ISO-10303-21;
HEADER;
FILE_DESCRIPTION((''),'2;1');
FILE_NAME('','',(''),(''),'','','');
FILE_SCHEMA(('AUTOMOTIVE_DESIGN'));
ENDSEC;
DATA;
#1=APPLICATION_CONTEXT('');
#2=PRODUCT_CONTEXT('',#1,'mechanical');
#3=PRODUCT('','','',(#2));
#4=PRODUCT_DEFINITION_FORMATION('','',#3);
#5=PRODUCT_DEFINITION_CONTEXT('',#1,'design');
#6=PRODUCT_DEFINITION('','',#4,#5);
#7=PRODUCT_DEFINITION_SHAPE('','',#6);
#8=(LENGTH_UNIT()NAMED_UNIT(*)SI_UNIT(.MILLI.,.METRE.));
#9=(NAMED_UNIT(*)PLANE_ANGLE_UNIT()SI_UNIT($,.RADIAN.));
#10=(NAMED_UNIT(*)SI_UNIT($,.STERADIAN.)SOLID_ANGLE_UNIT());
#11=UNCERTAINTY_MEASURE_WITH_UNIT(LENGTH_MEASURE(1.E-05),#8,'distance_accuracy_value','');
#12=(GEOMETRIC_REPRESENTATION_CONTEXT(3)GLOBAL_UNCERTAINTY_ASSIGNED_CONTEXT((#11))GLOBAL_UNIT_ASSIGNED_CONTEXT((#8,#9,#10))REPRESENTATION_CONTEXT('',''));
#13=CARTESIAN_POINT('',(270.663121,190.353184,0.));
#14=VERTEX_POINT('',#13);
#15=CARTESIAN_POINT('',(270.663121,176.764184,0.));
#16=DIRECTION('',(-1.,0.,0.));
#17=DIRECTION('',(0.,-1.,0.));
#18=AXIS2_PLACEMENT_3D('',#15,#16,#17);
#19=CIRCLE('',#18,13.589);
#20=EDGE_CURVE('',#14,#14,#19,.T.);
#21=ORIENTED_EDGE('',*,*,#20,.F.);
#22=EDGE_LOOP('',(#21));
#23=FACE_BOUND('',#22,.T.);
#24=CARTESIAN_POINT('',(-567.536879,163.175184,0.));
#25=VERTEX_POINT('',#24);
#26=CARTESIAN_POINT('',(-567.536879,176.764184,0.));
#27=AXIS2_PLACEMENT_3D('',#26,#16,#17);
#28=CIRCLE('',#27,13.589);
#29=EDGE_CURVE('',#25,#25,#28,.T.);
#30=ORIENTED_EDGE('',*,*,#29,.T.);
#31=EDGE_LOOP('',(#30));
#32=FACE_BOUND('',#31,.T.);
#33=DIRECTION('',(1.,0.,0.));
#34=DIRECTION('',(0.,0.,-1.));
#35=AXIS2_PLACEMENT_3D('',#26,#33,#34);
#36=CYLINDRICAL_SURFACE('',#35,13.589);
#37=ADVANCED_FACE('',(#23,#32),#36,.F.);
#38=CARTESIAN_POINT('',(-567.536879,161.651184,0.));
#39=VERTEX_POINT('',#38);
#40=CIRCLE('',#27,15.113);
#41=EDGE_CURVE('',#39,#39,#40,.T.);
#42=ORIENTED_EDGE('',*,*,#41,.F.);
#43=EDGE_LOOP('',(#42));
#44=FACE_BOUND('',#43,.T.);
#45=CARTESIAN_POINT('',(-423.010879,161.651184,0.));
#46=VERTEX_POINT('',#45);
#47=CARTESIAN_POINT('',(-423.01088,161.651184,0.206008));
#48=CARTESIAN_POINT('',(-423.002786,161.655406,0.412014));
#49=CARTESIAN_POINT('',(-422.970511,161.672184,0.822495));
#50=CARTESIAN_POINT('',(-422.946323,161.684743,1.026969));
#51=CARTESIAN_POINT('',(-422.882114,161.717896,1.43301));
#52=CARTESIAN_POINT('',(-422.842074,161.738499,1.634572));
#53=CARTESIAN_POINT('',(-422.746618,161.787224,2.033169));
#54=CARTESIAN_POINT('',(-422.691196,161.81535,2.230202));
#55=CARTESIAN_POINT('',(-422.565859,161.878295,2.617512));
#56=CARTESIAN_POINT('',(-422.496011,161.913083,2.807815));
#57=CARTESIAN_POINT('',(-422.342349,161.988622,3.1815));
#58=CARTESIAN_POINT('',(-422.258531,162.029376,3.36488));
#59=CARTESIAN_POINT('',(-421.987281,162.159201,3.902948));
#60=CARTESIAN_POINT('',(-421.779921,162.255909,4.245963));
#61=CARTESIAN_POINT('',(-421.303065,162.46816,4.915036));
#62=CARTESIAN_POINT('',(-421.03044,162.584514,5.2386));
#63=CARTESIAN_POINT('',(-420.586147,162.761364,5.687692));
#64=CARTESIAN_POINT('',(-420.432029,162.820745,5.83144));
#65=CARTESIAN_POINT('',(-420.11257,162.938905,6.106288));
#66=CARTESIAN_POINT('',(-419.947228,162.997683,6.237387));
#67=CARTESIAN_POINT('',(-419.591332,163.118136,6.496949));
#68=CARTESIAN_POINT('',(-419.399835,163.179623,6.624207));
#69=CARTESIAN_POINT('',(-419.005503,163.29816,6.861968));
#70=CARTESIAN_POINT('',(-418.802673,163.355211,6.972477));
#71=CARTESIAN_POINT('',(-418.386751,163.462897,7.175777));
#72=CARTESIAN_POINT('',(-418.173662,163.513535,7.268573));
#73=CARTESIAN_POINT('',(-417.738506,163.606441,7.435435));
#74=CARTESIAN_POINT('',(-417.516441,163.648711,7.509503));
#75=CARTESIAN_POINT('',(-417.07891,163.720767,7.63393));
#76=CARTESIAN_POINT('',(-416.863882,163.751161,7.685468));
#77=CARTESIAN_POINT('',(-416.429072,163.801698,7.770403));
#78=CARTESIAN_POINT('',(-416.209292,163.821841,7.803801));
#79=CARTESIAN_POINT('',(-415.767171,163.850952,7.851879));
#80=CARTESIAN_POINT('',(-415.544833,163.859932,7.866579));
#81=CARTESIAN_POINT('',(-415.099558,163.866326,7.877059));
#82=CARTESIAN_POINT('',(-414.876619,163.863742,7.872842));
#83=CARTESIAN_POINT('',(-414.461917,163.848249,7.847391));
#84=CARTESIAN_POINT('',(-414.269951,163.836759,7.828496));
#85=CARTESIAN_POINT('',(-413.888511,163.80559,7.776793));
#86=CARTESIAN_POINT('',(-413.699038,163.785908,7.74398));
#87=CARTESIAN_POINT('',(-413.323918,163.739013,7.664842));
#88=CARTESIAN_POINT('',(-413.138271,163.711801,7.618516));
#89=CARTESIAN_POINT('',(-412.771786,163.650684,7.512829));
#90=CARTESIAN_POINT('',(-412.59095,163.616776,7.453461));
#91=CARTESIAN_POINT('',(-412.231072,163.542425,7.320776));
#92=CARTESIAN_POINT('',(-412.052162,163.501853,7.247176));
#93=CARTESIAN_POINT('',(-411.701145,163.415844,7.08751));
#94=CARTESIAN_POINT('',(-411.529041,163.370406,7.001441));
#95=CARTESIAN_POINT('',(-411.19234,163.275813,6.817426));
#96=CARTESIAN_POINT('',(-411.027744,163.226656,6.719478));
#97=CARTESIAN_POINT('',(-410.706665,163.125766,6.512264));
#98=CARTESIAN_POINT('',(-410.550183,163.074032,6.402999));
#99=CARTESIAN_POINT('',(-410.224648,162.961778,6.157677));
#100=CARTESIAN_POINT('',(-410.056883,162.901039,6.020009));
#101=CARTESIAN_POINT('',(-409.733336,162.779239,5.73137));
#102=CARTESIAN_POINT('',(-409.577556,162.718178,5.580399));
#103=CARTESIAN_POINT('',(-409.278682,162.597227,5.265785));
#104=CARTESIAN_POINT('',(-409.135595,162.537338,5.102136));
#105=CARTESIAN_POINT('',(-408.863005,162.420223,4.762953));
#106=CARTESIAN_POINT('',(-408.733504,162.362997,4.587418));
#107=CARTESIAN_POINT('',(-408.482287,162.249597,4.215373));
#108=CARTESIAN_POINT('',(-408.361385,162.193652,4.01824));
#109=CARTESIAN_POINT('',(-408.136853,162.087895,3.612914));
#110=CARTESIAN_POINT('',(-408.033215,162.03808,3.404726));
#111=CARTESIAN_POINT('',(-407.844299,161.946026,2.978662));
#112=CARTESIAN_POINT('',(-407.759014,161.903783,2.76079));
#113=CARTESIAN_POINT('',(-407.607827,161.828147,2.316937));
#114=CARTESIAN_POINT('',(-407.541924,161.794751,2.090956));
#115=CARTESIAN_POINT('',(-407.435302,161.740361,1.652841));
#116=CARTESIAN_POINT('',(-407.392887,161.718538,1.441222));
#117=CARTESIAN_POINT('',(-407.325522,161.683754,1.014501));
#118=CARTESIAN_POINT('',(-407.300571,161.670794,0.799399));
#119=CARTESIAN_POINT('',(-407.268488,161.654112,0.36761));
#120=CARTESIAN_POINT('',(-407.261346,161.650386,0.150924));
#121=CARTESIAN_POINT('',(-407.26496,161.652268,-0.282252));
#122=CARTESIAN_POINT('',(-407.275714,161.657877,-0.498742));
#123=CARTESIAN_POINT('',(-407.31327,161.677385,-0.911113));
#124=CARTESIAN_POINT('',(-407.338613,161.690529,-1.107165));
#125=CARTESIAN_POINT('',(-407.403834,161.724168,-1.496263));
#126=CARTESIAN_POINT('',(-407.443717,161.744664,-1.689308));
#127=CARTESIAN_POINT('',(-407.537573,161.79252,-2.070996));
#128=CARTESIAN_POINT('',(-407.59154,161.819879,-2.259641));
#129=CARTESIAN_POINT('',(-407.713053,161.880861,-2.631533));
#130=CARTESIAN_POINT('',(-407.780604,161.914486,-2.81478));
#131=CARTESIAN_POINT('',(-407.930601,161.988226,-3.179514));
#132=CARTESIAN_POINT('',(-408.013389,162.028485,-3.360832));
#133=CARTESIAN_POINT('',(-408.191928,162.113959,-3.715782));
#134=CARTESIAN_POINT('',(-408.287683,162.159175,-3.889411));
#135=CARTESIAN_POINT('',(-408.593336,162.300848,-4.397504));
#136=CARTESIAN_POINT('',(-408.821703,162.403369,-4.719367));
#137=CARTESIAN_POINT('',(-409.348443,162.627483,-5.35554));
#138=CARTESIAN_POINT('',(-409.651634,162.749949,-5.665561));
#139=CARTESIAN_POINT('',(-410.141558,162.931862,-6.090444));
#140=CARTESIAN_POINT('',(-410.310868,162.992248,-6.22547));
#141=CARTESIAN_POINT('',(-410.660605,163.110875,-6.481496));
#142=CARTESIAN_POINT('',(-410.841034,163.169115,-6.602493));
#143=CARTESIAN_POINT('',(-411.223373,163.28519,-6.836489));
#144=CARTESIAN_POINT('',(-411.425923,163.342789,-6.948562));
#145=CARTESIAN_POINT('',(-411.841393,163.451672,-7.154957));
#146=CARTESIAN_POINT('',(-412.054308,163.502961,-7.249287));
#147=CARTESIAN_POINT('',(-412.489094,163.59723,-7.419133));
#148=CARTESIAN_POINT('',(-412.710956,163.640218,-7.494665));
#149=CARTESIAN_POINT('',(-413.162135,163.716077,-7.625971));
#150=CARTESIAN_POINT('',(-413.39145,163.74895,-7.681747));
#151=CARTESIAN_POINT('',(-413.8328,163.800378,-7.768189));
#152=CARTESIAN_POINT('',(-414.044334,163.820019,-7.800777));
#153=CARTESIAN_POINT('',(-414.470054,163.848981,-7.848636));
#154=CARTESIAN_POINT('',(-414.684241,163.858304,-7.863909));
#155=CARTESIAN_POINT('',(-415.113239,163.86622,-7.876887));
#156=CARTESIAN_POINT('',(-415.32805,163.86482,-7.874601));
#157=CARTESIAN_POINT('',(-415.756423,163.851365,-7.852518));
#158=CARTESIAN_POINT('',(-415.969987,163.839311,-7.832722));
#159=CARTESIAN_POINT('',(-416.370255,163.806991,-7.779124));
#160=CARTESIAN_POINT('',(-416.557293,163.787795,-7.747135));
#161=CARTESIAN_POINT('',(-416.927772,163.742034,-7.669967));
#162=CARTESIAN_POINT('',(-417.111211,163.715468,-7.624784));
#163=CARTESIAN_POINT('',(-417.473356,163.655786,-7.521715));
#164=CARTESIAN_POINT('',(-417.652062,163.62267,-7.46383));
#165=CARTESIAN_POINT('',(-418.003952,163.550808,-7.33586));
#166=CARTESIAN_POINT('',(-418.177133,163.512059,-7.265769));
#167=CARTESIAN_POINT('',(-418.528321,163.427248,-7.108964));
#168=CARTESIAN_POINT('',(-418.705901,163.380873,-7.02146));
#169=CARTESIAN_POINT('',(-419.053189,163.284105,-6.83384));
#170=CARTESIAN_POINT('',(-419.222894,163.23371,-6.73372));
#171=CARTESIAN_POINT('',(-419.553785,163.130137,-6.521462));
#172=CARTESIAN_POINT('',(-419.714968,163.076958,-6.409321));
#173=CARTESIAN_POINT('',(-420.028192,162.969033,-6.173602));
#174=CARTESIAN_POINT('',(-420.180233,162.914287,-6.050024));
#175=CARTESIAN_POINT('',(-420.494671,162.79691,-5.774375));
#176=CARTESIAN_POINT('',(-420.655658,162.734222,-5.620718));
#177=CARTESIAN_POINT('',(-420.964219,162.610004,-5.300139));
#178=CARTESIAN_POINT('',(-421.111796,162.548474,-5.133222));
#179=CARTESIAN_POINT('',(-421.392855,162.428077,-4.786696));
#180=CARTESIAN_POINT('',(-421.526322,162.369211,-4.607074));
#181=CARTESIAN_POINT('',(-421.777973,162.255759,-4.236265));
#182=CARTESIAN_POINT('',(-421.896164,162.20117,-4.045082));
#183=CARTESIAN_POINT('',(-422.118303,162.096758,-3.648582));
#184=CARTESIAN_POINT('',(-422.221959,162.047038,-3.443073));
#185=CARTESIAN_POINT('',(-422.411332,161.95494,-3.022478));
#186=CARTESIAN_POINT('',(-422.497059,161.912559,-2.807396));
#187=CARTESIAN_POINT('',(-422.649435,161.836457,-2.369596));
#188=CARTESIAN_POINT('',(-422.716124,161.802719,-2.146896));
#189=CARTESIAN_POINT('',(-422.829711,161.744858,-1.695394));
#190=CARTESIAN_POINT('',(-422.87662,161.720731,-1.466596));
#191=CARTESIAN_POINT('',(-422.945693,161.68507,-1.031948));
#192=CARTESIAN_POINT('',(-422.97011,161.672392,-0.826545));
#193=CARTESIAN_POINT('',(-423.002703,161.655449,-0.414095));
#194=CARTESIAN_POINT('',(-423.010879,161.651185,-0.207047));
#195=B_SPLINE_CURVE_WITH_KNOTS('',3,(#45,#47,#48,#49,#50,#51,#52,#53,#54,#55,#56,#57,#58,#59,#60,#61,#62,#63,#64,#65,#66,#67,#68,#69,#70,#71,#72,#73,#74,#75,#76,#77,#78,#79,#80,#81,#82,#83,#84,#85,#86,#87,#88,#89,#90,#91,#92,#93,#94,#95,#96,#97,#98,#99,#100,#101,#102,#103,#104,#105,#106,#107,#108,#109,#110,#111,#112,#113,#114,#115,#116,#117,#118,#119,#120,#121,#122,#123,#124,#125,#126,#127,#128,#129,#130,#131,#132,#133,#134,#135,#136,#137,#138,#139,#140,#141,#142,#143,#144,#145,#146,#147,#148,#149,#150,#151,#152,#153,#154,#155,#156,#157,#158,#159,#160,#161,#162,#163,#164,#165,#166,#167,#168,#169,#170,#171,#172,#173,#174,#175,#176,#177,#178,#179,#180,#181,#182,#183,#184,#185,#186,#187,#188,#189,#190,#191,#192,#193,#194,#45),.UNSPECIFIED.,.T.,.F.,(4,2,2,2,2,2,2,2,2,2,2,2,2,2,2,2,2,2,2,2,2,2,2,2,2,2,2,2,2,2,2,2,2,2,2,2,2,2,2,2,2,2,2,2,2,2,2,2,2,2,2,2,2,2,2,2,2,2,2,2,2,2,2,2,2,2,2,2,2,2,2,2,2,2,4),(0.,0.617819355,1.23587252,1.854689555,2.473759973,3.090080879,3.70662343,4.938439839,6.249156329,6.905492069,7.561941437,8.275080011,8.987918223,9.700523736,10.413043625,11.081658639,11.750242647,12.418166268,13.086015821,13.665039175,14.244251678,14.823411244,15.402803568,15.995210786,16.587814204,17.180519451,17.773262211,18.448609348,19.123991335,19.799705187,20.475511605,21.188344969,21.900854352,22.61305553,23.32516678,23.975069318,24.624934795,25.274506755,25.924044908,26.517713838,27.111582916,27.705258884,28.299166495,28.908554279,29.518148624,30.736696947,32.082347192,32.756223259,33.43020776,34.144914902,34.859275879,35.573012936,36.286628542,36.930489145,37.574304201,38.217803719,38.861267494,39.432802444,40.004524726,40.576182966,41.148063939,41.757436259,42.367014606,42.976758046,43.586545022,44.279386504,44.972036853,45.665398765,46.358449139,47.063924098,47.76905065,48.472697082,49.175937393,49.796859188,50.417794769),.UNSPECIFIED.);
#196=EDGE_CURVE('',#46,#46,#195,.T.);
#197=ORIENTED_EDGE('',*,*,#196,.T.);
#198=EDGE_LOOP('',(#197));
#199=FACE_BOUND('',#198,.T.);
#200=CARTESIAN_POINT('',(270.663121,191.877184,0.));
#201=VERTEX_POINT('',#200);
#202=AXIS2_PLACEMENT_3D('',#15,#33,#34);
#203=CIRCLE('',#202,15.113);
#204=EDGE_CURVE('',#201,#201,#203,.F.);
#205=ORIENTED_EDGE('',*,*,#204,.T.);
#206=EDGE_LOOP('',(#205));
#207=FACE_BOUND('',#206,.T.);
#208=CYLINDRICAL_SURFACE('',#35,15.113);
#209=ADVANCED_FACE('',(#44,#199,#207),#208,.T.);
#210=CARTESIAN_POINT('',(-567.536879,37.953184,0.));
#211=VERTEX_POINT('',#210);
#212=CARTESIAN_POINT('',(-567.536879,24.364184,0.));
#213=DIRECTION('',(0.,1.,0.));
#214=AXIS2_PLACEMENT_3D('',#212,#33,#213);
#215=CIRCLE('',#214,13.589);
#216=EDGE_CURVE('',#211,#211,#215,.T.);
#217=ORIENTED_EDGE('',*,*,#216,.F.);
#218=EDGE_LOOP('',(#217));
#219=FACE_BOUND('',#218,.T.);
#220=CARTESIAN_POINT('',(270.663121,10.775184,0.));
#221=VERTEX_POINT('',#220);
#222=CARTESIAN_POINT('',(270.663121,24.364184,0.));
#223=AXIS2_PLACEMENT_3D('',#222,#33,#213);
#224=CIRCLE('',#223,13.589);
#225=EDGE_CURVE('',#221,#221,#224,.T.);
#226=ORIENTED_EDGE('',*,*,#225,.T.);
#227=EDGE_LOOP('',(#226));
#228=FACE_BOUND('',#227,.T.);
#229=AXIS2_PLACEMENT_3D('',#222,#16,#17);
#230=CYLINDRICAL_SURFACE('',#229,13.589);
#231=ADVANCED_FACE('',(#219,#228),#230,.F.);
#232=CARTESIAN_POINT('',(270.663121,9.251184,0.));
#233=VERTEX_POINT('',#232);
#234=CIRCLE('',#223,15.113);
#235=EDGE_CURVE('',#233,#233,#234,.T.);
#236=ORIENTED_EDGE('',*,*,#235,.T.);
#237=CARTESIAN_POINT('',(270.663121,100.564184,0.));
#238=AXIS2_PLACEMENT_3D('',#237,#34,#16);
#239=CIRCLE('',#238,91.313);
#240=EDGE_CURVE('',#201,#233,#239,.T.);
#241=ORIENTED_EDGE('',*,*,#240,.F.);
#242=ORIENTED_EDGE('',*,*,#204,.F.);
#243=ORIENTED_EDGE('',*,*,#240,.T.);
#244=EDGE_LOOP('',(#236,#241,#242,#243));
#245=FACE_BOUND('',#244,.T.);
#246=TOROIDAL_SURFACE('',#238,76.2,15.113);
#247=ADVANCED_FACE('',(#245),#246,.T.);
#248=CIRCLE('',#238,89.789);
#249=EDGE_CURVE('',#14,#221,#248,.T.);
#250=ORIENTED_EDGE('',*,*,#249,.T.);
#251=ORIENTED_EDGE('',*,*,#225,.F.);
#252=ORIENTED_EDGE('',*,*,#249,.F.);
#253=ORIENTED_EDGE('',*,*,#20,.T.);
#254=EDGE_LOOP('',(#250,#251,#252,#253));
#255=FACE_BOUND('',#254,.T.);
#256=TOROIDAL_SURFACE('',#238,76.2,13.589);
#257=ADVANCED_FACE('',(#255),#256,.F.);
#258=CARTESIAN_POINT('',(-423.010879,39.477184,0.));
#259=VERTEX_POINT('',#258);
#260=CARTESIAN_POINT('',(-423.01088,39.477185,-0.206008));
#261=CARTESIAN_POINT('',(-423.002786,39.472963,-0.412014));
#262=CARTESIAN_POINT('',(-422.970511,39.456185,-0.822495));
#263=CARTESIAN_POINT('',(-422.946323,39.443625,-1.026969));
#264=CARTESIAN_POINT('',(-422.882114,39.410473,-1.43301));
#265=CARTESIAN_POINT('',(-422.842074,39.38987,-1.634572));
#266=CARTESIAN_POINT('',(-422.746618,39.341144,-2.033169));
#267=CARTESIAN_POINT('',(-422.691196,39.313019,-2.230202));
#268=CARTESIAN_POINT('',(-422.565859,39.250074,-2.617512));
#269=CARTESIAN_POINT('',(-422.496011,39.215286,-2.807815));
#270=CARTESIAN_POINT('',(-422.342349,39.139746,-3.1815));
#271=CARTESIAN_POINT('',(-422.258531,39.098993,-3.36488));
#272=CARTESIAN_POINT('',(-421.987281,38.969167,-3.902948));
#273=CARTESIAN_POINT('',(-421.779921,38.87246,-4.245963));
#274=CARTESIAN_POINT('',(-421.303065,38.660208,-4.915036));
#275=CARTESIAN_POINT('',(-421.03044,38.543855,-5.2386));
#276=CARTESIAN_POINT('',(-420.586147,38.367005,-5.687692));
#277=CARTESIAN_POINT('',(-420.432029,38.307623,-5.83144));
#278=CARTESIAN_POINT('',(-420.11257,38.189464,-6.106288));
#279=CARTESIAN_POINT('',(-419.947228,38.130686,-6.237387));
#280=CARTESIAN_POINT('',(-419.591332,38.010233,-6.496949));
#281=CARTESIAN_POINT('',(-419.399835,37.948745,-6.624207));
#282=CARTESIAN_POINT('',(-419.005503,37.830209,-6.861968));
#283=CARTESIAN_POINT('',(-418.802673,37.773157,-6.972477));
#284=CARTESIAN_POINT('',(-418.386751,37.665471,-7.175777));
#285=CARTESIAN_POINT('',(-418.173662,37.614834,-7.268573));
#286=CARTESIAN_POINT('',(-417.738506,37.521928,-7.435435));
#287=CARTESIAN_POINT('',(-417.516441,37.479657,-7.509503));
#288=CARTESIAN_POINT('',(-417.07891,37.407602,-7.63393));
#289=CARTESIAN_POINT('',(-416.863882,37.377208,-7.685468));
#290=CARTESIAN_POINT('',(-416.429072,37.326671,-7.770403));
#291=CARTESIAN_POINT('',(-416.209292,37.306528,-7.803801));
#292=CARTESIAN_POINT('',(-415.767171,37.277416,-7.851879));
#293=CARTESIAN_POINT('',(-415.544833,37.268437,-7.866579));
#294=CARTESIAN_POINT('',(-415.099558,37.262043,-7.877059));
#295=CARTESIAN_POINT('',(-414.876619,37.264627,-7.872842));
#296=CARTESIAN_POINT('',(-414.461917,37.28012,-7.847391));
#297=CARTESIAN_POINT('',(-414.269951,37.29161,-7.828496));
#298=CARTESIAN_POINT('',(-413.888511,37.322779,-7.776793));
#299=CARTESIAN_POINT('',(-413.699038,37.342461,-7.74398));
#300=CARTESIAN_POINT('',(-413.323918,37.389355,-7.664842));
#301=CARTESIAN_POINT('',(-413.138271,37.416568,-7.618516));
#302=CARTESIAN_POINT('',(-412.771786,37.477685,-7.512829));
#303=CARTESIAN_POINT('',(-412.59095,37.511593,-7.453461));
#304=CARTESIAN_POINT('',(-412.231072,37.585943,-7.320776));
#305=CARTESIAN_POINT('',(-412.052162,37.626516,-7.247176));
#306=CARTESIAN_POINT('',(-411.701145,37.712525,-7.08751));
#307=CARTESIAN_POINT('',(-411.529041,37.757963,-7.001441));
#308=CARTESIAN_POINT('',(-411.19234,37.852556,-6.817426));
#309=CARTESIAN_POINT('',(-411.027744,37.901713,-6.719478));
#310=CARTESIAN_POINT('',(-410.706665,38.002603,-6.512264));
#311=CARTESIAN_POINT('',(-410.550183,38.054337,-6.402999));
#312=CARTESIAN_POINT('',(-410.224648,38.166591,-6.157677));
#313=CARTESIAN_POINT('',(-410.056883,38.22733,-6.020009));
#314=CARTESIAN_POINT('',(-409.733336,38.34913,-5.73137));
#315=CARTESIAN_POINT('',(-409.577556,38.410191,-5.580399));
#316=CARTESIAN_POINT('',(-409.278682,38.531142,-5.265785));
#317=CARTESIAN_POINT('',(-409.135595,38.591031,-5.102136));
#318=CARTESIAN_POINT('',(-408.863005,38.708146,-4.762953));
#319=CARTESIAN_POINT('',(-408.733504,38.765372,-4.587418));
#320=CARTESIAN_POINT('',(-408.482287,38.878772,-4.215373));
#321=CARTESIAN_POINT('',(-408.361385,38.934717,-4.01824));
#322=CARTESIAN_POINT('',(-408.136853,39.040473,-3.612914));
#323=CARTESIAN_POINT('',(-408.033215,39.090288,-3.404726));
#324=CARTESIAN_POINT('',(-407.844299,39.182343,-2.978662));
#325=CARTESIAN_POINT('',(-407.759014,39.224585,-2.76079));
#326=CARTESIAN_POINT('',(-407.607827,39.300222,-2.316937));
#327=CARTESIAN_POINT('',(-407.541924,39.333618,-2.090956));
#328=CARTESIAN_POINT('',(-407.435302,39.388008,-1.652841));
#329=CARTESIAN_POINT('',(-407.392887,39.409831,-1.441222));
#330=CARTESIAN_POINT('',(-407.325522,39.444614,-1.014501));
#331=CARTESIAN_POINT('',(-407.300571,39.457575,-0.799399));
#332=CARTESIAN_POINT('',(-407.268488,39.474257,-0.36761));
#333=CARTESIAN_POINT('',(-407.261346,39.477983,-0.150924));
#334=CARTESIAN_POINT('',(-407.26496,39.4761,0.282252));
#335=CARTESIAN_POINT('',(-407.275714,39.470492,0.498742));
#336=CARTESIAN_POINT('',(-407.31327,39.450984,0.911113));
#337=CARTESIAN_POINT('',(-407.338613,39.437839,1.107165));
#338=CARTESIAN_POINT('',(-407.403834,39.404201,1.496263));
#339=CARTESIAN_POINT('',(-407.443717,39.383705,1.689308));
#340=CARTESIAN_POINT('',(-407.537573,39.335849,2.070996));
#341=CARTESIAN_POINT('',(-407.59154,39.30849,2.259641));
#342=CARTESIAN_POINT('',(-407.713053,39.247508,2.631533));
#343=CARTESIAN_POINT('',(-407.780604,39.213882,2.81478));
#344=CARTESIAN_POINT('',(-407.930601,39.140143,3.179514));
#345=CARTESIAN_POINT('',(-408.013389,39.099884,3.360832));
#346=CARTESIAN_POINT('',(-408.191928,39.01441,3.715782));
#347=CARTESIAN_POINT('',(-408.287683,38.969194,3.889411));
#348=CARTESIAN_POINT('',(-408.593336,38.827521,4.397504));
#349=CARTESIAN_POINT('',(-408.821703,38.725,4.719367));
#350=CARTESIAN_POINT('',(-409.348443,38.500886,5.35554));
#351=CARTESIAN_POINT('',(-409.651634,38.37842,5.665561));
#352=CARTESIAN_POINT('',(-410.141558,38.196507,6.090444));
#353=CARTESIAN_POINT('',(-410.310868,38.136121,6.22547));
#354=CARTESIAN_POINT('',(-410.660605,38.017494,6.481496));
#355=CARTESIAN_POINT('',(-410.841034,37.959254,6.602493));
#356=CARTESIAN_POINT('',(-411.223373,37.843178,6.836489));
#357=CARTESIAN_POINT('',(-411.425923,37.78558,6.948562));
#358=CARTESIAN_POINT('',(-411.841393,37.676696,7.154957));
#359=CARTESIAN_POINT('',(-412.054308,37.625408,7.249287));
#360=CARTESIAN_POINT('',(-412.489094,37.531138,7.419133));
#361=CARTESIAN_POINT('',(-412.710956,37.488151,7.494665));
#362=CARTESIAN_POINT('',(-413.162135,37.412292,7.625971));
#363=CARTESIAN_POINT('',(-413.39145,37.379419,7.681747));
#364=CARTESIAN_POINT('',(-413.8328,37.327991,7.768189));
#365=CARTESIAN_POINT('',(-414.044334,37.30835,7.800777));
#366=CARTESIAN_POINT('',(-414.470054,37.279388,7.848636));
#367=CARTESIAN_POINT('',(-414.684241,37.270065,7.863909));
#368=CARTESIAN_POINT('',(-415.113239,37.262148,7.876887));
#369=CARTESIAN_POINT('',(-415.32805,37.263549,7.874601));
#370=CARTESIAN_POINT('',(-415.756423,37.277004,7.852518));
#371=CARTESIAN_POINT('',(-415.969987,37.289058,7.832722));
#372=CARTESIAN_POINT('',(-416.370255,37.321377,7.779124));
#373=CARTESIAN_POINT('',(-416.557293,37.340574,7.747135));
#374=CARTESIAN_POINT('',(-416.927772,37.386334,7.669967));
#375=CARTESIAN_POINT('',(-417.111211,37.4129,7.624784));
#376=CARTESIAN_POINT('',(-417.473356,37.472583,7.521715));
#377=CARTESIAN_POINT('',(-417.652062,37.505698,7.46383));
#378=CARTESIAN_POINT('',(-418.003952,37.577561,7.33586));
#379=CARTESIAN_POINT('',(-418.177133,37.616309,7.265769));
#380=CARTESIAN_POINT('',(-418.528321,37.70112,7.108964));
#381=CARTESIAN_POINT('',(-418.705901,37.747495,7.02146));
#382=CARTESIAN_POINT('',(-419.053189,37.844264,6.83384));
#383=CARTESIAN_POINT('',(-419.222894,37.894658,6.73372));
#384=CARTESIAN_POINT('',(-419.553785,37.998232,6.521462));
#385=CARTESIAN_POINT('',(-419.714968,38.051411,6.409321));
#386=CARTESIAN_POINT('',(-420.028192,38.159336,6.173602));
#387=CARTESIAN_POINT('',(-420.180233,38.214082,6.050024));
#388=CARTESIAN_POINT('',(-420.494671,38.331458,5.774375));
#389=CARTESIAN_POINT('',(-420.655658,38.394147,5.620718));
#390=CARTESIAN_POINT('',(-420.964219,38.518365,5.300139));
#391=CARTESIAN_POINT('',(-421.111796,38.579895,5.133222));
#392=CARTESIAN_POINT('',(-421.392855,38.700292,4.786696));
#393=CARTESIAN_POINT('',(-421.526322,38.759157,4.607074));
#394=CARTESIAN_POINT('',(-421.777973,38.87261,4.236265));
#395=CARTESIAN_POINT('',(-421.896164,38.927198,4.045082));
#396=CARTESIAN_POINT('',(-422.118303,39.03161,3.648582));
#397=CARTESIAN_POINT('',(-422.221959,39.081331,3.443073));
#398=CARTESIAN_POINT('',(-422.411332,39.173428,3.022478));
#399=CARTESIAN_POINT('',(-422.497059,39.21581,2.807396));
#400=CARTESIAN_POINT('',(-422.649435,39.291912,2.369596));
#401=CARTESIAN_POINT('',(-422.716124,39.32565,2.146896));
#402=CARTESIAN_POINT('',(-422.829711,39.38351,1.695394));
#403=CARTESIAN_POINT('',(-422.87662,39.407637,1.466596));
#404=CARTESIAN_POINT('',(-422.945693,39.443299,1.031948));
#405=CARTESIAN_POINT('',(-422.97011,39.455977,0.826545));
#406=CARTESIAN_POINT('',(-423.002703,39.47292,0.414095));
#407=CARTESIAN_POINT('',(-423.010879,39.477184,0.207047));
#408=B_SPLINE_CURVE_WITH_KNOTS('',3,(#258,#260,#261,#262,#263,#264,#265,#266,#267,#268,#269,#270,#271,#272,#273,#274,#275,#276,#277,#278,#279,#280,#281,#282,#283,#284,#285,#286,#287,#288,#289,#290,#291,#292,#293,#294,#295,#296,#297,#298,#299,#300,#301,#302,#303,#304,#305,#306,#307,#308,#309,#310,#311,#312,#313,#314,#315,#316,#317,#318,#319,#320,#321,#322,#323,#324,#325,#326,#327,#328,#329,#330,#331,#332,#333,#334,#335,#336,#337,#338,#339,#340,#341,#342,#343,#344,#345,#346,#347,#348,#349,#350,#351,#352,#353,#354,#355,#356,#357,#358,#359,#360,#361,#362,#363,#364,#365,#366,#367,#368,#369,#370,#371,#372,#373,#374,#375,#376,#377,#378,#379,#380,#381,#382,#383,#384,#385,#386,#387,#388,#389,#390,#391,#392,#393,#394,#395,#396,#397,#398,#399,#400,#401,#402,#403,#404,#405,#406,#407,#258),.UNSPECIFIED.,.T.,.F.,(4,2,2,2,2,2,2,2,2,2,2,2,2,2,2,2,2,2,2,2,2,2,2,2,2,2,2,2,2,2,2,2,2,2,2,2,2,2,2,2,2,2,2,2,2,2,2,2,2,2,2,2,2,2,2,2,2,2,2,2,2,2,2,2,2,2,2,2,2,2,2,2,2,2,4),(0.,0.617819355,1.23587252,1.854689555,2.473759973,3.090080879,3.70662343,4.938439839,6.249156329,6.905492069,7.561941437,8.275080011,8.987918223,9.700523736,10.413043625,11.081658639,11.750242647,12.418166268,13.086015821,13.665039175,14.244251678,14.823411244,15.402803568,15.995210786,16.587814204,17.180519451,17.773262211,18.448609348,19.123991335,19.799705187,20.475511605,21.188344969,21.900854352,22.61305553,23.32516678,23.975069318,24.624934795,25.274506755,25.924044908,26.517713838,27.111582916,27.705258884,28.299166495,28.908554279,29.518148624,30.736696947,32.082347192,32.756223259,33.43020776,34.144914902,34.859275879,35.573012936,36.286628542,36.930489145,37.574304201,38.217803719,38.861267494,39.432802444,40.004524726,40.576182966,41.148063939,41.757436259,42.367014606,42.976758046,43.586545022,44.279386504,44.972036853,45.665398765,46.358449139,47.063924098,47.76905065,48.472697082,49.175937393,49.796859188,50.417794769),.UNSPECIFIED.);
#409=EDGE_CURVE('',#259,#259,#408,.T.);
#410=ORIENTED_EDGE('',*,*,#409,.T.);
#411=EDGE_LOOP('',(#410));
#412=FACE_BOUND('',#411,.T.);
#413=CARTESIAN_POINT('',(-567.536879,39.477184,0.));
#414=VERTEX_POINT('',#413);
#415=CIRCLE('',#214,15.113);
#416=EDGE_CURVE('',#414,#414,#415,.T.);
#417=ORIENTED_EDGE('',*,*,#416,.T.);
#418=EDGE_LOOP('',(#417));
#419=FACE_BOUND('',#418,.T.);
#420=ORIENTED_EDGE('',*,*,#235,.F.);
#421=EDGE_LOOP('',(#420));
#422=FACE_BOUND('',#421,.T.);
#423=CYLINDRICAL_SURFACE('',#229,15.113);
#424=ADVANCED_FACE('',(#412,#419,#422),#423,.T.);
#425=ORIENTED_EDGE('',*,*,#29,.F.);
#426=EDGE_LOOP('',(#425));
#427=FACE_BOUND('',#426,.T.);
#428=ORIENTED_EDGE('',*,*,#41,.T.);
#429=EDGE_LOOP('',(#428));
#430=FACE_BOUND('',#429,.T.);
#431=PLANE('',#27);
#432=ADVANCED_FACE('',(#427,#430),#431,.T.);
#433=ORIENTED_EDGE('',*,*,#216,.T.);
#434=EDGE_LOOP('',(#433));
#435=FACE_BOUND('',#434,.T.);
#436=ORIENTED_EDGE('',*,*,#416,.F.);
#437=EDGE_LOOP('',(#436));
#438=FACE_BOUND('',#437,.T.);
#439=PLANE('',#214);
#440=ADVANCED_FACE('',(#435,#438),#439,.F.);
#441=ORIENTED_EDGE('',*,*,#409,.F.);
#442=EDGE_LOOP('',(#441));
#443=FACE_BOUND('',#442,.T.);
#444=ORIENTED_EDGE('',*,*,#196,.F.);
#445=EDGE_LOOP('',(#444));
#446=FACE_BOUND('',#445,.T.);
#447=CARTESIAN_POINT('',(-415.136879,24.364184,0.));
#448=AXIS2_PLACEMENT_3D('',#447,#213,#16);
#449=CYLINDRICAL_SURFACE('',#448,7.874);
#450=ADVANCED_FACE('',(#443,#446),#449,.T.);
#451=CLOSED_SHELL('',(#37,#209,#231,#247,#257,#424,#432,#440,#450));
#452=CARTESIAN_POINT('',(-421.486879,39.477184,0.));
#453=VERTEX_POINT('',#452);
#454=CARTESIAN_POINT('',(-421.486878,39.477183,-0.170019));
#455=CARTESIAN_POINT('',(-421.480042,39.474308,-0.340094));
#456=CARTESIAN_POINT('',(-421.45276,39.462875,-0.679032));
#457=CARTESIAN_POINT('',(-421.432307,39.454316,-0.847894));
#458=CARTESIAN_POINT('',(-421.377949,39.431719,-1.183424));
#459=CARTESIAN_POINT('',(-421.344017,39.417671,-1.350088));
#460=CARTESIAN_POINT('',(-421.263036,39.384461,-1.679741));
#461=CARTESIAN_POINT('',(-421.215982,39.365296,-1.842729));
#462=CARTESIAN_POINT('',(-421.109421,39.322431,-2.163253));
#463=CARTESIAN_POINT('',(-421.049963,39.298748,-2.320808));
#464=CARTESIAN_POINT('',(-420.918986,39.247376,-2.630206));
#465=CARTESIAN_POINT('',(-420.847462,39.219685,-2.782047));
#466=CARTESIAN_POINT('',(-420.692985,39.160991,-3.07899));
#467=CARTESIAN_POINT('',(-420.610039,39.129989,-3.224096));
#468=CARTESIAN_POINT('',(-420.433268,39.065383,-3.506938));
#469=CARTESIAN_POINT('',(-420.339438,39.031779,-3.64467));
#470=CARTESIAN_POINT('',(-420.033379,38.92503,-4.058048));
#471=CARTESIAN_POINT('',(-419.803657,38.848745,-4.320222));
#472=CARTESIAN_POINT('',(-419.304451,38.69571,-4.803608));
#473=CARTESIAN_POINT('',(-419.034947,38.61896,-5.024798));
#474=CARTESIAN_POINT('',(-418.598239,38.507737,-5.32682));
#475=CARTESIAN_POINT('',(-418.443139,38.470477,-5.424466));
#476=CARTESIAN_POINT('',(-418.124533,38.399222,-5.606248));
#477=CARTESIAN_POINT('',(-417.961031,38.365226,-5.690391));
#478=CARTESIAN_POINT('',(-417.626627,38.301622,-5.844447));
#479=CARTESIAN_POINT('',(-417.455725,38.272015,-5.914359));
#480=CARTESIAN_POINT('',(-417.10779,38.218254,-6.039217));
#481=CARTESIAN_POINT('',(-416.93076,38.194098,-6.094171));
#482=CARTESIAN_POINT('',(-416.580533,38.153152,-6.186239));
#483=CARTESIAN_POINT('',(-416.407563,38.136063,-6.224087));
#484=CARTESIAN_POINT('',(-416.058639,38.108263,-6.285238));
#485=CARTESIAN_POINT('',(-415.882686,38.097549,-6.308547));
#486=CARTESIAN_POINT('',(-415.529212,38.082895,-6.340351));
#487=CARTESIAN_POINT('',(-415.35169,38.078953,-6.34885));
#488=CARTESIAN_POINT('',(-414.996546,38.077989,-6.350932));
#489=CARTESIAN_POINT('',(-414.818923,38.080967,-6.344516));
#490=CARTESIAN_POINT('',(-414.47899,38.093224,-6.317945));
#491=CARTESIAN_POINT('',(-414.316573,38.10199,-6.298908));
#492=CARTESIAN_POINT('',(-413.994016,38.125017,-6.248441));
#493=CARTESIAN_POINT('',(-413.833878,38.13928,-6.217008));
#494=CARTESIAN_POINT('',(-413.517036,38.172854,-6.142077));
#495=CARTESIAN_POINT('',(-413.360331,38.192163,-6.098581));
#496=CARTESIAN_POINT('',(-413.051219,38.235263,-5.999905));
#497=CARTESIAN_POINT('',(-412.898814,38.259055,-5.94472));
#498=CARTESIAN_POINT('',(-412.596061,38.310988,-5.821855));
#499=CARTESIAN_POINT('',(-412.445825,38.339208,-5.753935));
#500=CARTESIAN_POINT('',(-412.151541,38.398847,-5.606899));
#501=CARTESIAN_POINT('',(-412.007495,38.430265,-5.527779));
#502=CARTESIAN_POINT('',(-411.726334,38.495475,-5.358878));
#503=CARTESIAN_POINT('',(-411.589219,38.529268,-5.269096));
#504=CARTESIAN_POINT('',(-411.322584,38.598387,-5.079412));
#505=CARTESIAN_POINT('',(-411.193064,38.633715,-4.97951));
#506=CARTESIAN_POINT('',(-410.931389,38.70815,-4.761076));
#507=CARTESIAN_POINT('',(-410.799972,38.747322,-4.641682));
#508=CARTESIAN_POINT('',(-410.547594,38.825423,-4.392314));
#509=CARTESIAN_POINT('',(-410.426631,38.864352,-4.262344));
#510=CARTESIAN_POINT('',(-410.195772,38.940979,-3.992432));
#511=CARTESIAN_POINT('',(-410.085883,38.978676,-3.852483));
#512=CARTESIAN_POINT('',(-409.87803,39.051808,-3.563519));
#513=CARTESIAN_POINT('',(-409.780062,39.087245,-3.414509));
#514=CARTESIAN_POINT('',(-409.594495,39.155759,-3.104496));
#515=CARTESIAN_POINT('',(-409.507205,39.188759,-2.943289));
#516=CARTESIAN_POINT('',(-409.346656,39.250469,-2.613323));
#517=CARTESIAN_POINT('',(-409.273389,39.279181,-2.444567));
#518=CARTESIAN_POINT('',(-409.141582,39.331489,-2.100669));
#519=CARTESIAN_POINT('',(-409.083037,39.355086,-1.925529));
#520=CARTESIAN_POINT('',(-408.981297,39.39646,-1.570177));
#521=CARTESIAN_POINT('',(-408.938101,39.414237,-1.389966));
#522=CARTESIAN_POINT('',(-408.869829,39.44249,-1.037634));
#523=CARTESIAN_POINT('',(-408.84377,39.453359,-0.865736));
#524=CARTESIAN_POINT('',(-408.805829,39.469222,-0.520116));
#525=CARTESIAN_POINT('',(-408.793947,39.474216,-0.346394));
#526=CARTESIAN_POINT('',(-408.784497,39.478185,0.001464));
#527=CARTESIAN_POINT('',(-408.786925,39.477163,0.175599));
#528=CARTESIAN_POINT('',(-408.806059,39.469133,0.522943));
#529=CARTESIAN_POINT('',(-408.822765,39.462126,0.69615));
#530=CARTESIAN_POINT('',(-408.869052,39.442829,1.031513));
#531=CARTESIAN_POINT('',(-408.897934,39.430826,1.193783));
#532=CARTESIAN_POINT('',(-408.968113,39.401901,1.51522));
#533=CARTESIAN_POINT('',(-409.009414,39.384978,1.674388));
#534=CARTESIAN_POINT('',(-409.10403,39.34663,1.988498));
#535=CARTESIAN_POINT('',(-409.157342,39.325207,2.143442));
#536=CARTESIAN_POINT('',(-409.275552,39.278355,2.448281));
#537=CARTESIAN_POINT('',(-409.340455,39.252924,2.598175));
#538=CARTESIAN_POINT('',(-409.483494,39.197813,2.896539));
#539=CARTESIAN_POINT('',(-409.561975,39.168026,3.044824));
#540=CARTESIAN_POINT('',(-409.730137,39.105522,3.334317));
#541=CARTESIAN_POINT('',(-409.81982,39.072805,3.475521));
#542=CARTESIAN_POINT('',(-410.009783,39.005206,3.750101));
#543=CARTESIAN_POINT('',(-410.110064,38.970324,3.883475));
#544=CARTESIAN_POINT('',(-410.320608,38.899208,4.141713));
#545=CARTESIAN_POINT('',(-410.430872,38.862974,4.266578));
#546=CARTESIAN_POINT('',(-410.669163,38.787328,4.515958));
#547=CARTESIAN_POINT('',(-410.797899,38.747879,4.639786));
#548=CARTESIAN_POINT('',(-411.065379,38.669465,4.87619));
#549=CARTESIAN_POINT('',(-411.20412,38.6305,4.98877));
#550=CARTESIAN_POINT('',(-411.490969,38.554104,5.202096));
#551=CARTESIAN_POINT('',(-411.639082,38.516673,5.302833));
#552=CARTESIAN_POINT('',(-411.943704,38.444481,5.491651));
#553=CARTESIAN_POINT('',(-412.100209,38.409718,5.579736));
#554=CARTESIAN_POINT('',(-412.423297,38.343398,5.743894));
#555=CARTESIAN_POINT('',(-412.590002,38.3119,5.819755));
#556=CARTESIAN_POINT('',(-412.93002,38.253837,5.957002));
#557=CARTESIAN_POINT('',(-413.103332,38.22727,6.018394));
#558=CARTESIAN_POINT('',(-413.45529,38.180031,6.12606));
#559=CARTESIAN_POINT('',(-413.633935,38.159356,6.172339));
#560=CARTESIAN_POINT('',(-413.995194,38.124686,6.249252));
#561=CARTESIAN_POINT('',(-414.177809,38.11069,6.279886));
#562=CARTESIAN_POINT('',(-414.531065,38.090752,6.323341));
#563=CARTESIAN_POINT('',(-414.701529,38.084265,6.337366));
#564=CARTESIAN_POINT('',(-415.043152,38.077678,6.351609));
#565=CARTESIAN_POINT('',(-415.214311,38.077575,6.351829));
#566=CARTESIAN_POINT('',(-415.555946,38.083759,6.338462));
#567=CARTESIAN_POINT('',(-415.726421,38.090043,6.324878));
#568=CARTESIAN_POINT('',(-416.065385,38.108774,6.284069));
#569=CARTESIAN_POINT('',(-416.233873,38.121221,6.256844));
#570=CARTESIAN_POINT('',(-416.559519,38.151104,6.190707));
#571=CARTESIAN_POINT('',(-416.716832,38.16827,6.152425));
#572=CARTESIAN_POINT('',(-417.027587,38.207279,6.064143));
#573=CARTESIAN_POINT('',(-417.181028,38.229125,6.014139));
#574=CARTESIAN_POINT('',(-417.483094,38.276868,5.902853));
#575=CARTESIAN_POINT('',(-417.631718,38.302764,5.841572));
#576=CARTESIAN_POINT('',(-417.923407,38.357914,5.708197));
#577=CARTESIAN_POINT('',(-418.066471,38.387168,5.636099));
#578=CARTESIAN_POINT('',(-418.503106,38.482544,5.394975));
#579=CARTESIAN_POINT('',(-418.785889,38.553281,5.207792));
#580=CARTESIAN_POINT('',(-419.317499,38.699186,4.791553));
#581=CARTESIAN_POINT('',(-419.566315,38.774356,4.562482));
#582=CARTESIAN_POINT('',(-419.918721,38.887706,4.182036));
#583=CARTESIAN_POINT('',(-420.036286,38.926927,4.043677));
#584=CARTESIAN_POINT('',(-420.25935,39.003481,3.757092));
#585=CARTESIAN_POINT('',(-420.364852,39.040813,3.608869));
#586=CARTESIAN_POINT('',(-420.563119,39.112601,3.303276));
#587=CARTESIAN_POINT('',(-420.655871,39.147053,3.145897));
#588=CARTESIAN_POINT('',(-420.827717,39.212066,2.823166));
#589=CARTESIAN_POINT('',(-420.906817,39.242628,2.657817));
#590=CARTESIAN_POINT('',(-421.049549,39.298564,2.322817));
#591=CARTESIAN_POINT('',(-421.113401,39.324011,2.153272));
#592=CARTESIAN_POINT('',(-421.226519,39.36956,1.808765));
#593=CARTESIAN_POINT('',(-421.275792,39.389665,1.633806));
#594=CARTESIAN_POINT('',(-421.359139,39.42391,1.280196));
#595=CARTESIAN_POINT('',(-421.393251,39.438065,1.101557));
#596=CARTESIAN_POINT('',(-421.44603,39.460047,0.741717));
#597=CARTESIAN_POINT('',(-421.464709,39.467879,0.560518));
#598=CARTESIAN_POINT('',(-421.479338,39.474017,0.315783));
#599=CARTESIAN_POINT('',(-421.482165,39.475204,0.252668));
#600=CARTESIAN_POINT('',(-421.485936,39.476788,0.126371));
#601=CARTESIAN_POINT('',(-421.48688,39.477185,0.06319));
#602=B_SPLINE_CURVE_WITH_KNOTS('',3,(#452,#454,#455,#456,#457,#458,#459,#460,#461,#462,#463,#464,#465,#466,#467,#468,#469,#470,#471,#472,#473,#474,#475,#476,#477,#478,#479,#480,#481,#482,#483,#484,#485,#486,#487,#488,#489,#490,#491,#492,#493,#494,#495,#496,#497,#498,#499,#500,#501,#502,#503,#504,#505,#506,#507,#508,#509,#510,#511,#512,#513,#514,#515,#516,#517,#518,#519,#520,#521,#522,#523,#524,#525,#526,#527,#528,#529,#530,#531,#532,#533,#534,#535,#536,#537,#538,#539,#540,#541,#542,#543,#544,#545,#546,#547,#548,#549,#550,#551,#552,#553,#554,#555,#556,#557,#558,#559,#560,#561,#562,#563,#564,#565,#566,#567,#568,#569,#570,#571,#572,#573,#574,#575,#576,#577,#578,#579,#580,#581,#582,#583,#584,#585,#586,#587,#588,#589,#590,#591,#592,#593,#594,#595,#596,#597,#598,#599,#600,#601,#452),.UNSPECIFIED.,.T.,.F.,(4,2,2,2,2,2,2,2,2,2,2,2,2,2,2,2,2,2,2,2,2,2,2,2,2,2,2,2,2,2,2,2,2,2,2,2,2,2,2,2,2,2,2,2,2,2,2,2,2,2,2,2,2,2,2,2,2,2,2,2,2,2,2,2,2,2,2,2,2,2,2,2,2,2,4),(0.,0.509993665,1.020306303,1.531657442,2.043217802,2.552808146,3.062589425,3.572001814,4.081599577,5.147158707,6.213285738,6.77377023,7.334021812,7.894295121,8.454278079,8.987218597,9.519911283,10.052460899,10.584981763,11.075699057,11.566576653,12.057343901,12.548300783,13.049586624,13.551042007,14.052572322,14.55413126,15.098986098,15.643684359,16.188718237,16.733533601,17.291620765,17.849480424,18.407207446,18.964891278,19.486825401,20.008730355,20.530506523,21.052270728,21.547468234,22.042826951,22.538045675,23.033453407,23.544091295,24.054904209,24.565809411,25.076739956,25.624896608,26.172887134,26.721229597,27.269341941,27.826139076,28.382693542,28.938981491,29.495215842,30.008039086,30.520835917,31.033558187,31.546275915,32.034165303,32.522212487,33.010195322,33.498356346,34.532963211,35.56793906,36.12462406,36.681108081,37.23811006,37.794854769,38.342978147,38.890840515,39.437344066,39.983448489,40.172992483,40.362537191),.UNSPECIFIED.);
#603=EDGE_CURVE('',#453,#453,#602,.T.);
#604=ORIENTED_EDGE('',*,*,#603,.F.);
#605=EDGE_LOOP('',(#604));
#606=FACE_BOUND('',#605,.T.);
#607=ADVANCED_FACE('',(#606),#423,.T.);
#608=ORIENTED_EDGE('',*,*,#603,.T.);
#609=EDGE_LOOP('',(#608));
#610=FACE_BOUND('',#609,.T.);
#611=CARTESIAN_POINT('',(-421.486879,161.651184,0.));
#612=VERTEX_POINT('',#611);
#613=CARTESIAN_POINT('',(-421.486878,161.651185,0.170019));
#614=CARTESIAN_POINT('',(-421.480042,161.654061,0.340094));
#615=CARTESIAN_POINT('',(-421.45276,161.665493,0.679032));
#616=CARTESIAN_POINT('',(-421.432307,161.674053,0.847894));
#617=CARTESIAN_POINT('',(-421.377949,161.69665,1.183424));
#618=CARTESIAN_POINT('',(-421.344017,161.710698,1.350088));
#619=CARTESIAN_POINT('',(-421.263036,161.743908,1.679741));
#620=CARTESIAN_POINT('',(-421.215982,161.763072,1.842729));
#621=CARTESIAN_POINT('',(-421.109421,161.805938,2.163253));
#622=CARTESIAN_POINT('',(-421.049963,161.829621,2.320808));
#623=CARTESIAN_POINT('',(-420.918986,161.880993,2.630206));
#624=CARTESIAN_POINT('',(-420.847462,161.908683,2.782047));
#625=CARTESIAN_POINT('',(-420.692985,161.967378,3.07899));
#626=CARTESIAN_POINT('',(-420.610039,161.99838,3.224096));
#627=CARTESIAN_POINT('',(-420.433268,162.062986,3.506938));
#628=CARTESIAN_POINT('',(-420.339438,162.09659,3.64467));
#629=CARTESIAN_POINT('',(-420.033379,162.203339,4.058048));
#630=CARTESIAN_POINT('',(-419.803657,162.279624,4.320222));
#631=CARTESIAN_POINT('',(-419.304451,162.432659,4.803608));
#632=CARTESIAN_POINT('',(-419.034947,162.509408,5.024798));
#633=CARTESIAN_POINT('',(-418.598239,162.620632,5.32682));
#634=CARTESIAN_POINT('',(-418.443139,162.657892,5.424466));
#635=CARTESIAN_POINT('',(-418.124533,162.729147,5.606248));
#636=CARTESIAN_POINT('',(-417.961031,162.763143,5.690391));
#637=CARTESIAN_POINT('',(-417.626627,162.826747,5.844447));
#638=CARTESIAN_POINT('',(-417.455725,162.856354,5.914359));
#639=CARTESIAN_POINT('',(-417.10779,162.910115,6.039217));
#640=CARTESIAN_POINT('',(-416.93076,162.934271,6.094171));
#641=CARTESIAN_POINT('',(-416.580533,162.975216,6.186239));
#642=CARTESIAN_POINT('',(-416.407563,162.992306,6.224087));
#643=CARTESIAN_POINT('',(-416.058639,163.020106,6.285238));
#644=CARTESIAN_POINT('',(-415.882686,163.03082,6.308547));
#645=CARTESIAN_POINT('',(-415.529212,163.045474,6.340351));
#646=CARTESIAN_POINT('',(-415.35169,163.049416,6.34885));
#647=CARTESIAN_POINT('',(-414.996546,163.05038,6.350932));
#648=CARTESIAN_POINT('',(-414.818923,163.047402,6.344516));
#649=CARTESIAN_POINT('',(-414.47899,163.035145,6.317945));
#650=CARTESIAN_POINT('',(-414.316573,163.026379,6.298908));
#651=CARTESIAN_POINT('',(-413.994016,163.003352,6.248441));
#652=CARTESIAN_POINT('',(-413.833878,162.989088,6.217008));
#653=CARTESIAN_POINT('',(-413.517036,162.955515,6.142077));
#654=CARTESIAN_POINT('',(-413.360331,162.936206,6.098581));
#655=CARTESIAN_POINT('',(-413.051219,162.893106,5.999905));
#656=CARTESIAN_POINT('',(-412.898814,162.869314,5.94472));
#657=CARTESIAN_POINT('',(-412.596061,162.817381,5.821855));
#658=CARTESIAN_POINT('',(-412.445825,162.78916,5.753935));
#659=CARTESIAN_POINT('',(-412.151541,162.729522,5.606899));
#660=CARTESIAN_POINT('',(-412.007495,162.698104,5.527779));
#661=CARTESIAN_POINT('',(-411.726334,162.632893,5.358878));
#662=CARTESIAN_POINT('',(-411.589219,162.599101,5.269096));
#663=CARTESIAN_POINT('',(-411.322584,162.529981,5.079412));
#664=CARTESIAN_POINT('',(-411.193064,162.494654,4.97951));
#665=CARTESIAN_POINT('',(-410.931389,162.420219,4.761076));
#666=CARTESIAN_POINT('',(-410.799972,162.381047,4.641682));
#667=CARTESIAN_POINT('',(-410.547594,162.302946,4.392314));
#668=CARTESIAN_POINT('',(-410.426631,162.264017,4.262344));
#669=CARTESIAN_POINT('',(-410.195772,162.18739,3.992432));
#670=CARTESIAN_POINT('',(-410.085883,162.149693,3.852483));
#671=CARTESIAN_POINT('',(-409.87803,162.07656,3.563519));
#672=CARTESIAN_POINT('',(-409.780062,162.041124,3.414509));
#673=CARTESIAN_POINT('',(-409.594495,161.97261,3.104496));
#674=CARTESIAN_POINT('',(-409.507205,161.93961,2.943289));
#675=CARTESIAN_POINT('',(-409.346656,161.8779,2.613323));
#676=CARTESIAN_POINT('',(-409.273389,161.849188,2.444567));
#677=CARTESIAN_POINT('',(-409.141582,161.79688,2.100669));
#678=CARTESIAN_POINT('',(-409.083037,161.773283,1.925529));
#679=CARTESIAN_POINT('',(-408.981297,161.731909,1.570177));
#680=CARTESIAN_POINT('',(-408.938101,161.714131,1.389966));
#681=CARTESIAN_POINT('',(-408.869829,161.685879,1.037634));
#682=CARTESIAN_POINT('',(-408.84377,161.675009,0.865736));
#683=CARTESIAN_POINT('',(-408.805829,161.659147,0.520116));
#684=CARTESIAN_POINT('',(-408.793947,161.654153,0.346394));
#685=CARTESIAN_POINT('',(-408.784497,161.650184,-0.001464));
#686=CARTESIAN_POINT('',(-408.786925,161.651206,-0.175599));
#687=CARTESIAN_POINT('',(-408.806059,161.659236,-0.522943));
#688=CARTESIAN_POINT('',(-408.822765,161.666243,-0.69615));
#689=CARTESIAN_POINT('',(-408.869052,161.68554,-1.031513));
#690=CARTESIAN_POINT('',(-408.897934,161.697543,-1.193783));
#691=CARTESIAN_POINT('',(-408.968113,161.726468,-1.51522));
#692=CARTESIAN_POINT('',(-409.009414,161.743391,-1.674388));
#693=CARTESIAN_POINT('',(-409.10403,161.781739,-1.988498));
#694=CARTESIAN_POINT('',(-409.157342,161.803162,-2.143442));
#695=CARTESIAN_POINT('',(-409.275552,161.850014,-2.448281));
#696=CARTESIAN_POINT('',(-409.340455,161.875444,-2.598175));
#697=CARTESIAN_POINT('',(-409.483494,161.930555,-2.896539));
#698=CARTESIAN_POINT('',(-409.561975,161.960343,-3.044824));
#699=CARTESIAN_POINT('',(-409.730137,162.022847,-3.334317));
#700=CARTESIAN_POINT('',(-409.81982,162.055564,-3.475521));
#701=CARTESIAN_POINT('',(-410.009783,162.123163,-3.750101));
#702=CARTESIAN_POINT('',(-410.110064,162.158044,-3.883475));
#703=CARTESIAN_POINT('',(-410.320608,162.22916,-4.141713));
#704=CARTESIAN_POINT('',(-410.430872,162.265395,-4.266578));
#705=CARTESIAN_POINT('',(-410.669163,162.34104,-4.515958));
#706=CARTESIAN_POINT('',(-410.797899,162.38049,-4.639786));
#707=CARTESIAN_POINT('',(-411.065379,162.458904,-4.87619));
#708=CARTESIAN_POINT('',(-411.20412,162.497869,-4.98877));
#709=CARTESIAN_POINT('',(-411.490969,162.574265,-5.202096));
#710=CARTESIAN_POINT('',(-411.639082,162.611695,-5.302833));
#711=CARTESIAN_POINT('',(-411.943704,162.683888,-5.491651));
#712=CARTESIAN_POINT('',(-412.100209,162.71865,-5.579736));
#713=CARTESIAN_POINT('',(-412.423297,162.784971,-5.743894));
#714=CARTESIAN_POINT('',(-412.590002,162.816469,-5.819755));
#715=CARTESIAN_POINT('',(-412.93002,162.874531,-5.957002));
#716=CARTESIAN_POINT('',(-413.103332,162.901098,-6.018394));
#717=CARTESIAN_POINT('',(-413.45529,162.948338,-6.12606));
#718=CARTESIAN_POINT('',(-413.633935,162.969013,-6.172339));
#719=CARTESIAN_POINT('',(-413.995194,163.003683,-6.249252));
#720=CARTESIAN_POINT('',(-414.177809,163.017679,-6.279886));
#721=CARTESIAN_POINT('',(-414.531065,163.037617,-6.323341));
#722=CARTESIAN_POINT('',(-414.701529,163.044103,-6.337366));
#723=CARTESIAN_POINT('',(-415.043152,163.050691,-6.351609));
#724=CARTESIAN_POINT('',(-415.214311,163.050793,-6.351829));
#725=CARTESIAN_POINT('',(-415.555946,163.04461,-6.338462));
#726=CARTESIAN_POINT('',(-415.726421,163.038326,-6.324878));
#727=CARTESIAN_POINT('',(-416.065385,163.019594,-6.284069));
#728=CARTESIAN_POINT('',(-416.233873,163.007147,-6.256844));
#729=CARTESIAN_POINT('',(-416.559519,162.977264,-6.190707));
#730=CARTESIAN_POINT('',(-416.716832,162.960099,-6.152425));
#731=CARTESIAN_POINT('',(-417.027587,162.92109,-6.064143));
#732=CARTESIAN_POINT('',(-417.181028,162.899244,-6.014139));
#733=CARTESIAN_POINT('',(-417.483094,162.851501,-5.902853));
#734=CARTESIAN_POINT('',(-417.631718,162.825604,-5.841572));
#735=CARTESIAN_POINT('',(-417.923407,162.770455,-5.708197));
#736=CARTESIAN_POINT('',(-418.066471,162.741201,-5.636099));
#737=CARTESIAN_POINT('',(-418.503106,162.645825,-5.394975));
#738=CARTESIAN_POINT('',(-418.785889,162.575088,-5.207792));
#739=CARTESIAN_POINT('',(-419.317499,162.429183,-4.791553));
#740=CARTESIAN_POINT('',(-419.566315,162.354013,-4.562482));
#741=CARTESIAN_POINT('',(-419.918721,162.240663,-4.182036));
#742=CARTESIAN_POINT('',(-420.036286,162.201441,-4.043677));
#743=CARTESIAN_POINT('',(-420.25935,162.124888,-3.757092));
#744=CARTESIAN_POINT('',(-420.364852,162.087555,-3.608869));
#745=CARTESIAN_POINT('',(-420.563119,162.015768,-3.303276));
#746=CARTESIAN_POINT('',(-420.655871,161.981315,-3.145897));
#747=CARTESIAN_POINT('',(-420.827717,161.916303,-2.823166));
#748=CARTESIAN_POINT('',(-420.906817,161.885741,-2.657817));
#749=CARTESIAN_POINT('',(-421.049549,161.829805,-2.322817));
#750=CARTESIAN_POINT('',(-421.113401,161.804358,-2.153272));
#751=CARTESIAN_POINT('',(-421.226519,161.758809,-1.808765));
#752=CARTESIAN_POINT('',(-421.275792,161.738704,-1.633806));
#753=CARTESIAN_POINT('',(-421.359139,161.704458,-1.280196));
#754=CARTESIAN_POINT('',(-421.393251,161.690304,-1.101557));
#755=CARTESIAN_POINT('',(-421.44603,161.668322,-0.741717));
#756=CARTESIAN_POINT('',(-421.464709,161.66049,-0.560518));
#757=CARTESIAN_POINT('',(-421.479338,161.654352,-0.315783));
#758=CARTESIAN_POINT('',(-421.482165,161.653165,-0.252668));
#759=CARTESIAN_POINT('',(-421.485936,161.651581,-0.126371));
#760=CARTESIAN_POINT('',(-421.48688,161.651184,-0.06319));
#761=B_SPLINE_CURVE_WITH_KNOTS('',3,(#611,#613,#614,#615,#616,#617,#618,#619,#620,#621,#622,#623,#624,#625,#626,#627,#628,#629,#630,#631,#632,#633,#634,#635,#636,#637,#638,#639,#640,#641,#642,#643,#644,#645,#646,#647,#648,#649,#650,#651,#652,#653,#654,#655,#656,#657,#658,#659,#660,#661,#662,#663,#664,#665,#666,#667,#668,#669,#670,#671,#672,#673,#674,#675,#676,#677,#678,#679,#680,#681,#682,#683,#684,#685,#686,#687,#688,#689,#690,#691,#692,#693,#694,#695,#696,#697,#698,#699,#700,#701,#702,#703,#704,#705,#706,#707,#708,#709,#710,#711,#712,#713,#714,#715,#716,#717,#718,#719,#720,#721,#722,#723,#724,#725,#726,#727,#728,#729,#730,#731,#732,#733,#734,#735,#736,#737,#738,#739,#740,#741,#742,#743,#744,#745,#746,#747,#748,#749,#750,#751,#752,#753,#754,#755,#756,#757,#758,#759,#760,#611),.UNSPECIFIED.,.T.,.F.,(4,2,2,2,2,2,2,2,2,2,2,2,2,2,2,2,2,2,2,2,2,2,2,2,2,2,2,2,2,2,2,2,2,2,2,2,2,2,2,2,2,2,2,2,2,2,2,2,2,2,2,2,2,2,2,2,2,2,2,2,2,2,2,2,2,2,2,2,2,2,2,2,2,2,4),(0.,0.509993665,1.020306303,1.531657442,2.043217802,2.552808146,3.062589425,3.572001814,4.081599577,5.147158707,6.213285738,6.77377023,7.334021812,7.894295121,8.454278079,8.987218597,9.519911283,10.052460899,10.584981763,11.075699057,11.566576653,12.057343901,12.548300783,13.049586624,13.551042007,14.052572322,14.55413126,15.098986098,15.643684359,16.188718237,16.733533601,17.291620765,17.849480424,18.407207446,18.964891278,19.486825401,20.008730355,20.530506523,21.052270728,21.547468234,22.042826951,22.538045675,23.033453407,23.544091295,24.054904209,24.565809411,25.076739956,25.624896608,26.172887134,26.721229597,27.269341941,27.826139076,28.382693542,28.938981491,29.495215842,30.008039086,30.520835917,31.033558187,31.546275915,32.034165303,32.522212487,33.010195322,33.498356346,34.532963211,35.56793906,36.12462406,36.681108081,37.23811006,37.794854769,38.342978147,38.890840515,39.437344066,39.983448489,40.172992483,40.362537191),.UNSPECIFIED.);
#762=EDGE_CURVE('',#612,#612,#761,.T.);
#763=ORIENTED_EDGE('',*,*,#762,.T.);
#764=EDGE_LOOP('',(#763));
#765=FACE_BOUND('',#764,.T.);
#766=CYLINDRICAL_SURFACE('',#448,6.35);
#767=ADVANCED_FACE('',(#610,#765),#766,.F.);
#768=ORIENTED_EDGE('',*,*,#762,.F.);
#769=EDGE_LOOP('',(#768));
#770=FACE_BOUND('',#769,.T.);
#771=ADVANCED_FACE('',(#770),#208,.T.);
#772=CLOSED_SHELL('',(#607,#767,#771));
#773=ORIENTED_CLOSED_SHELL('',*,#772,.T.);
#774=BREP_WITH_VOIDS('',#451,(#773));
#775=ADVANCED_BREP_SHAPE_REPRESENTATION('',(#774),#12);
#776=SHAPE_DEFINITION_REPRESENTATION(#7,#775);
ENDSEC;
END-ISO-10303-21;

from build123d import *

# Parameters (mm, degrees)
SWEEP_THIN1_PROFILE_R   = 15.113
SWEEP_THIN1_PROFILE_R_2 = 13.589
SWEEP_THIN3_START       = 24.364184397
SWEEP_THIN3_OUTLINE_R   = 7.874
SWEEP_THIN3_OUTLINE_R_2 = 6.35
SWEEP_THIN3_DEPTH       = 152.4
CUT_EXTRUDE1_START      = -279.4
SKETCH47_R              = 13.589
CUT_EXTRUDE1_DEPTH      = 279.4
SKETCH48_R              = 13.589
CUT_EXTRUDE2_DEPTH      = 279.4


# Read off the part's stored shape, not the designer's step: Sweep-Thin3
with BuildPart() as part:
    # Sweep-Thin1: sweep along a path in Sketch1
    with BuildLine(Plane.XY) as sweep_thin1_path:
        Line((-567.536879433, 176.764184397), (270.663120567, 176.764184397))
        ThreePointArc((270.663120567, 176.764184397), (346.863120567, 100.564184397), (270.663120567, 24.364184397))
        Line((270.663120567, 24.364184397), (-567.536879433, 24.364184397))
    # Sweep-Thin1 profile (on start of the path) → Sweep-Thin1 (sweep)
    with BuildSketch(Plane(origin=(-567.536879433, 176.764184397, 0), x_dir=(0, 0, 1), z_dir=(1, 0, 0))):
        Circle(SWEEP_THIN1_PROFILE_R)
        Circle(SWEEP_THIN1_PROFILE_R_2, mode=Mode.SUBTRACT)
    sweep(path=sweep_thin1_path.line)

    # Sweep-Thin3 outline → Sweep-Thin3 (add)
    with BuildSketch(Plane(origin=(0, 0, 0), x_dir=(1, 0, 0), z_dir=(0, 1, 0)).offset(SWEEP_THIN3_START)):
        with Locations((-415.136879433, 0)):
            Circle(SWEEP_THIN3_OUTLINE_R)
        with Locations((-415.136879433, 0)):
            Circle(SWEEP_THIN3_OUTLINE_R_2, mode=Mode.SUBTRACT)
    extrude(amount=SWEEP_THIN3_DEPTH)

    # Sketch47 → Cut-Extrude1 (cut)
    with BuildSketch(Plane.ZY.offset(567.536879433).offset(CUT_EXTRUDE1_START)):
        with Locations(Location((0, 176.764184397, 0), (0, 0, 90))):
            Circle(SKETCH47_R)
    extrude(amount=CUT_EXTRUDE1_DEPTH, mode=Mode.SUBTRACT)

    # Sketch48 → Cut-Extrude2 (cut)
    with BuildSketch(Plane.ZY.offset(567.536879433)):
        with Locations(Location((0, 24.364184397, 0), (0, 0, 270))):
            Circle(SKETCH48_R)
    extrude(amount=-CUT_EXTRUDE2_DEPTH, mode=Mode.SUBTRACT)


solid = part.part
